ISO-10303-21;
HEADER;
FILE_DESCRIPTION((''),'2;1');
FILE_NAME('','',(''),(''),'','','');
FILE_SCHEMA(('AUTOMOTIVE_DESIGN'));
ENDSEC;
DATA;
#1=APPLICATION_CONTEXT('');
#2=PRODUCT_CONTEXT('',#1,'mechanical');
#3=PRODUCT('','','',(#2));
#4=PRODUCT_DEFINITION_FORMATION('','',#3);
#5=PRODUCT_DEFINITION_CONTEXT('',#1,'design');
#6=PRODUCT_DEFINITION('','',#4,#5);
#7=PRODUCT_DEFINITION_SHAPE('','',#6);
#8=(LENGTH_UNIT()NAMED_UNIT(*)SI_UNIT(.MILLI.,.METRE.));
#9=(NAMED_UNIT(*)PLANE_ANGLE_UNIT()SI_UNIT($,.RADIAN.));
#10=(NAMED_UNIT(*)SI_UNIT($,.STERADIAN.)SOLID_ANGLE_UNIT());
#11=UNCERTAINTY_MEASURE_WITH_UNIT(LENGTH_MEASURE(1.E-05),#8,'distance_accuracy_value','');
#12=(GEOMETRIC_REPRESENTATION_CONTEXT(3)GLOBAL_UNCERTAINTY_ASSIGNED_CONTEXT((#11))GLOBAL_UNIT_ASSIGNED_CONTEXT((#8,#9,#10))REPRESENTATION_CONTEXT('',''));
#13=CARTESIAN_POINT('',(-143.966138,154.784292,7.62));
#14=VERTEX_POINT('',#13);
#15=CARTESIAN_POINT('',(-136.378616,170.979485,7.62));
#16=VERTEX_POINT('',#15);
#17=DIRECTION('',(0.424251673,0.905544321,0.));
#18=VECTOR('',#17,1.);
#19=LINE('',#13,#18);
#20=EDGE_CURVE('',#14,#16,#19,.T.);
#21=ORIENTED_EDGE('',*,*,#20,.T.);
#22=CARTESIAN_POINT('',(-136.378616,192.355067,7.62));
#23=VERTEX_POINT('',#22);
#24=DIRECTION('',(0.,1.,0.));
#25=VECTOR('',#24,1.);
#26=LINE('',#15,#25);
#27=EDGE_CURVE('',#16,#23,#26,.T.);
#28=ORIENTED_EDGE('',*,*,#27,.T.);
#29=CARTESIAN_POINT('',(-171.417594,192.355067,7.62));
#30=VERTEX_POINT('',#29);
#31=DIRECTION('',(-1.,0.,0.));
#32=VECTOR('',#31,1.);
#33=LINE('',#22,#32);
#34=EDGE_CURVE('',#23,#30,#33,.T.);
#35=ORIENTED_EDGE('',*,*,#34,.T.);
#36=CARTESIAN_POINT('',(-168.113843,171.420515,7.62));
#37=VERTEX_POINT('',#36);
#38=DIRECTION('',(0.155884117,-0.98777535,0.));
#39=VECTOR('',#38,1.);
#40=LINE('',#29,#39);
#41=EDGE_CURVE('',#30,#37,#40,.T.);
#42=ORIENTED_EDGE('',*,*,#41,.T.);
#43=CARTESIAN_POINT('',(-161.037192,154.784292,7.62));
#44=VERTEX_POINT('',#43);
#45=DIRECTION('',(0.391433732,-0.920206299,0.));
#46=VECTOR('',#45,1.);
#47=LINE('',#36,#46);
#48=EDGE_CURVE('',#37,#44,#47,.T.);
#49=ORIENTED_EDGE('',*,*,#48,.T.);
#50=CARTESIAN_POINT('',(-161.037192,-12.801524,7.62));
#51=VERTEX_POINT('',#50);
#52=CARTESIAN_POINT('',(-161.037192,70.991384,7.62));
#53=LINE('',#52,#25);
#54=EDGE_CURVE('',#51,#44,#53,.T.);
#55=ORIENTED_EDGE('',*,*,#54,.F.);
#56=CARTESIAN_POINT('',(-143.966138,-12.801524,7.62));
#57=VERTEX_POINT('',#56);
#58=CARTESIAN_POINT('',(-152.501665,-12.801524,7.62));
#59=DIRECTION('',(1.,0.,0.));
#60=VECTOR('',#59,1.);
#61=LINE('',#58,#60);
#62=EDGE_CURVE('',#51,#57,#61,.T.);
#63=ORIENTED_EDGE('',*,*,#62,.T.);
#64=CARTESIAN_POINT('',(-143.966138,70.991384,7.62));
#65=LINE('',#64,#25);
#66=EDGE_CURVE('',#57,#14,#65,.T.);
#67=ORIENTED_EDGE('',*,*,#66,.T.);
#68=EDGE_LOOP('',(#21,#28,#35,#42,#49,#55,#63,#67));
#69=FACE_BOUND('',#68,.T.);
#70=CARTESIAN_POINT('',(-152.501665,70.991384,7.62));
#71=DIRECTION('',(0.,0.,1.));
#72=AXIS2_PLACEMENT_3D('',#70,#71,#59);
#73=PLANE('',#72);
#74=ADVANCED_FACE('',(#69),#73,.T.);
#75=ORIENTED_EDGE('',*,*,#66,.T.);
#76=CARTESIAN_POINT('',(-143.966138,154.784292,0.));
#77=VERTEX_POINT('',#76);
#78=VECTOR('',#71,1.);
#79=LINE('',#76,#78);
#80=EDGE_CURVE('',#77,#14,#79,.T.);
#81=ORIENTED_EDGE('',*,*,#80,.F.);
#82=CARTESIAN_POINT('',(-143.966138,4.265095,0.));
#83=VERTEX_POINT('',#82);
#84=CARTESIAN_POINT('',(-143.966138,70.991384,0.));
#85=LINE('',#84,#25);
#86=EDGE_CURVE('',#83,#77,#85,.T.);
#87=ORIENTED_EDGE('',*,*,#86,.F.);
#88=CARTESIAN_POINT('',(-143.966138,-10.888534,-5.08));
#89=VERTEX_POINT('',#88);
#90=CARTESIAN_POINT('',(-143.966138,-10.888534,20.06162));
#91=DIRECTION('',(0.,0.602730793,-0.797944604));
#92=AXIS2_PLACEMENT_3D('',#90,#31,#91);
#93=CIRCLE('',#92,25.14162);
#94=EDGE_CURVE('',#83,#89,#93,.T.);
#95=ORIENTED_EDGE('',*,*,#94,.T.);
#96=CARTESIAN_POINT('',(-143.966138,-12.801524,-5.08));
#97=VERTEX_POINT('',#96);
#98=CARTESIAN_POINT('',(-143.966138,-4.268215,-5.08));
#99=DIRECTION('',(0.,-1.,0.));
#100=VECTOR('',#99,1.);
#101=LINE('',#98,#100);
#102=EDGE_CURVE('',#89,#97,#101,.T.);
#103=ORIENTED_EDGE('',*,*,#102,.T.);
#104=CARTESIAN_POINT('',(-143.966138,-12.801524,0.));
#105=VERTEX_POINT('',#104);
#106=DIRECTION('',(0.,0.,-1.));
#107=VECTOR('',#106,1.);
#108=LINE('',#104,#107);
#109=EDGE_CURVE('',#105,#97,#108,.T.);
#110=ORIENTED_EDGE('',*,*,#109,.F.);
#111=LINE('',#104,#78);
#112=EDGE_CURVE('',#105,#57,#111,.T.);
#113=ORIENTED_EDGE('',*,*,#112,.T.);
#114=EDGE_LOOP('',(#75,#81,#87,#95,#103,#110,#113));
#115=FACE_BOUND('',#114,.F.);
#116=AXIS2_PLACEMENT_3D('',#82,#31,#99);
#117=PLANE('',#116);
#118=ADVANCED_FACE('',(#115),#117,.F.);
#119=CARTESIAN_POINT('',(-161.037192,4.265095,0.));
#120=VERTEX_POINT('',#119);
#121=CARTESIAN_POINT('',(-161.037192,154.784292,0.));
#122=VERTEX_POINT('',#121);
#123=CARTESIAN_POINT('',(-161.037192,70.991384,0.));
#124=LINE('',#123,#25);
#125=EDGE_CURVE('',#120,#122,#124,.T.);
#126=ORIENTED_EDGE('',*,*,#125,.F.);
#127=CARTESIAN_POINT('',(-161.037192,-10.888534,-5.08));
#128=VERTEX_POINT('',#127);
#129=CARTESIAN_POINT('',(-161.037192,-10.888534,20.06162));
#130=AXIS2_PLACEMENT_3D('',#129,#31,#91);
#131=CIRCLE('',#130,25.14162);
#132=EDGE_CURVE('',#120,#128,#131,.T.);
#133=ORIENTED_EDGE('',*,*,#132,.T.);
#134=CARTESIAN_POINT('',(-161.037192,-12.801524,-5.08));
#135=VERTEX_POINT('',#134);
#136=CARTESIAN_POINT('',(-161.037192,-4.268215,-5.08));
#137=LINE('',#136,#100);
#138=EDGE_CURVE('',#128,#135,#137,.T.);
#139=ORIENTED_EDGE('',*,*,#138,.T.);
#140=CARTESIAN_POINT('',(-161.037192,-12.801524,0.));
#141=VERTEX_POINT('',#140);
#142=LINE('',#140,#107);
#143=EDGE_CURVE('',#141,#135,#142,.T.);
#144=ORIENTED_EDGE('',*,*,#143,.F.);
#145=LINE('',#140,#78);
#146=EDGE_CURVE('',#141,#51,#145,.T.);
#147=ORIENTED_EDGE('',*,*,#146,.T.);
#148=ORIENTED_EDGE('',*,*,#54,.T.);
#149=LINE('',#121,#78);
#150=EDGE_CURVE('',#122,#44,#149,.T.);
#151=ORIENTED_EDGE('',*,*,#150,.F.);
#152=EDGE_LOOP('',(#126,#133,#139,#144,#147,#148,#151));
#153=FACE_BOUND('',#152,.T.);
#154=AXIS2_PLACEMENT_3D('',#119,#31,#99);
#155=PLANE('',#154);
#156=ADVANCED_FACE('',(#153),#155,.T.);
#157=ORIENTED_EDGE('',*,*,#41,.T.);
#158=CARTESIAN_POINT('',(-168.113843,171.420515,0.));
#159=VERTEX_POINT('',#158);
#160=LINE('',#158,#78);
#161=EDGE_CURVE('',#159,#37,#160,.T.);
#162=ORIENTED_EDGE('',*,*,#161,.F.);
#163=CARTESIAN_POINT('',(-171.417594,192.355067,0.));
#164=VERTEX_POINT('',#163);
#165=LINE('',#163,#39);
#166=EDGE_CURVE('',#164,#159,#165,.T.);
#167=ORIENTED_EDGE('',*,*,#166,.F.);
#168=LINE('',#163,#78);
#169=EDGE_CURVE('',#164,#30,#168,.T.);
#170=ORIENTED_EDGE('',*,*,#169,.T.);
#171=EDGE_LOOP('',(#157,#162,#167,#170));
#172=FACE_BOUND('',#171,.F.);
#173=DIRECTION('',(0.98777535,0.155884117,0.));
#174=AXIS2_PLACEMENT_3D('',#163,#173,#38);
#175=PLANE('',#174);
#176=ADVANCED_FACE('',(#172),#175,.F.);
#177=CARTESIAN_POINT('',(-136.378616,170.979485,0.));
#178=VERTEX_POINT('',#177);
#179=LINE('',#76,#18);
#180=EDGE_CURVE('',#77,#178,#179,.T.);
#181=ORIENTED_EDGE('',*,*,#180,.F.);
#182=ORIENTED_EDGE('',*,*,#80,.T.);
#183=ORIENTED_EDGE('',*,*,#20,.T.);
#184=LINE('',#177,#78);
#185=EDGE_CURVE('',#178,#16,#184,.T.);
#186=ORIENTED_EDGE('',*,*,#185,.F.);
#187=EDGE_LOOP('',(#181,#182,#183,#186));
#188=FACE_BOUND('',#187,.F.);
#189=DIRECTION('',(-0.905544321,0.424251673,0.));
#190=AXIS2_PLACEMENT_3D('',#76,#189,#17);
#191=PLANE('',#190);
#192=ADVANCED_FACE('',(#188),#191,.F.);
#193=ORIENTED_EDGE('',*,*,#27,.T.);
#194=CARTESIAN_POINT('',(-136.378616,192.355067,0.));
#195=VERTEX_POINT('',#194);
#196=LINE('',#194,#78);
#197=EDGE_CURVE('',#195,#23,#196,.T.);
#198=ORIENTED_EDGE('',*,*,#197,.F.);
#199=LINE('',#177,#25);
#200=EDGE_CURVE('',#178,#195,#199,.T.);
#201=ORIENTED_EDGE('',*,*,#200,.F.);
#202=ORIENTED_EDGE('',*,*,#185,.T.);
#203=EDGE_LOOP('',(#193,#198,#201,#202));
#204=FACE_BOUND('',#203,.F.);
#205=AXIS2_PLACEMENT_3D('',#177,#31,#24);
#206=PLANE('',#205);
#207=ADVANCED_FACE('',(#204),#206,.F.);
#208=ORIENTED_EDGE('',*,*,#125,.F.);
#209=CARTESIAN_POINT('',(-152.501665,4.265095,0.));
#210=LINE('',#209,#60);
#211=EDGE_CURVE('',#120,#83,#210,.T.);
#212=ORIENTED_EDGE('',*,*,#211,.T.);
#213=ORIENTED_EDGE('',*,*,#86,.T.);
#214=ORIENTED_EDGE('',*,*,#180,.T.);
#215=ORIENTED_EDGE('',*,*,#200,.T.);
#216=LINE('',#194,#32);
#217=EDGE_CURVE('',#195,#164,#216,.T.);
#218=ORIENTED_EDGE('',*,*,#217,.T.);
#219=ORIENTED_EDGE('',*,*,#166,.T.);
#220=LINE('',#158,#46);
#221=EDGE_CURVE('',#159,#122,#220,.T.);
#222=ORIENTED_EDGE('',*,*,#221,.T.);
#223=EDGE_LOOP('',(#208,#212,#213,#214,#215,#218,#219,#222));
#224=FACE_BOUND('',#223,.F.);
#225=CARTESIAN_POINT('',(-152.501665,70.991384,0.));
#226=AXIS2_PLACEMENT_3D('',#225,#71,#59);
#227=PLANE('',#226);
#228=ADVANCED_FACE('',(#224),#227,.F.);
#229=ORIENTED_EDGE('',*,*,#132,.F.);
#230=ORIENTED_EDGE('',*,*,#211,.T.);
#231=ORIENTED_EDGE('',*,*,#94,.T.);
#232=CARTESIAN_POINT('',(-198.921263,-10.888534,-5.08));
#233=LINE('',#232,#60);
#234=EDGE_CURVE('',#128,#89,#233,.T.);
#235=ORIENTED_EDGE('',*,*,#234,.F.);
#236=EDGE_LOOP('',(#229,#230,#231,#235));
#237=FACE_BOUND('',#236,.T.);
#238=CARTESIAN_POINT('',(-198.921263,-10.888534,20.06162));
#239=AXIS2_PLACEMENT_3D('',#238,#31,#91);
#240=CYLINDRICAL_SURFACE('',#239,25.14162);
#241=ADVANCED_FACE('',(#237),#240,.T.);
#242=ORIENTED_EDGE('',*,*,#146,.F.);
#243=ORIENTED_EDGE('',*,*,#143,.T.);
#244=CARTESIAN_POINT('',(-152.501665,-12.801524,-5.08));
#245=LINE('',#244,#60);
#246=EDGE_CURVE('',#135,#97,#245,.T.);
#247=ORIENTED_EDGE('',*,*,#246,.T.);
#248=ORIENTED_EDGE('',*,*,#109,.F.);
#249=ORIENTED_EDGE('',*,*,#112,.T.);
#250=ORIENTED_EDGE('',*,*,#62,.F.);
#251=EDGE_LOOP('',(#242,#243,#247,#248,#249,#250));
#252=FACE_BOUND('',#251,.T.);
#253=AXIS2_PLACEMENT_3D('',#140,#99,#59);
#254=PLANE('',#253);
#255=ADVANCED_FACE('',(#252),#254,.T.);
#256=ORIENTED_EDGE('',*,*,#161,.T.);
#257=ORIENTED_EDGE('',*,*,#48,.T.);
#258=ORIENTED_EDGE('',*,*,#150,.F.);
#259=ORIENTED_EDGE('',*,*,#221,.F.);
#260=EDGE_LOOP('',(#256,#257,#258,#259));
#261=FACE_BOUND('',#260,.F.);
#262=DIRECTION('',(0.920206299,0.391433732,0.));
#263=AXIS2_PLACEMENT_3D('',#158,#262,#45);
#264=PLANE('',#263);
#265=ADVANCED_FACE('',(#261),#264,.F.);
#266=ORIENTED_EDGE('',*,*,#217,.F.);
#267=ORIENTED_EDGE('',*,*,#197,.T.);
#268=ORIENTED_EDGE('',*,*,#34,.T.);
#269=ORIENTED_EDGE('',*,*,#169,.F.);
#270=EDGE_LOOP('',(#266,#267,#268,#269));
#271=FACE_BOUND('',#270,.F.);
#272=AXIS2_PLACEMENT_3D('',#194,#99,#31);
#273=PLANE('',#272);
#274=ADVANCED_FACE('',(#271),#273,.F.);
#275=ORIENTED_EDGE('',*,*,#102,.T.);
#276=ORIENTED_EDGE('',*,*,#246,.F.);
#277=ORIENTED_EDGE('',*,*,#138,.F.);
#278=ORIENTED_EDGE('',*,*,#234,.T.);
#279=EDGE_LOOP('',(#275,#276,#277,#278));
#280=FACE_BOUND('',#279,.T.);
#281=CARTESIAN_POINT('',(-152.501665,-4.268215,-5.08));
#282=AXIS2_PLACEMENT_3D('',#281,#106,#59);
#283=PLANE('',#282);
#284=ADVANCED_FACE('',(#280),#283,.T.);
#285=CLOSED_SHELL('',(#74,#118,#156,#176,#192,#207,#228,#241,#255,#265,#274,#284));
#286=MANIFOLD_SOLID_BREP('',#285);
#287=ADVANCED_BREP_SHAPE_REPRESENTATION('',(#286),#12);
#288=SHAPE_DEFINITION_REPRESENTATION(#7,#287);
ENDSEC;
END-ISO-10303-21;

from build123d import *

# Parameters (mm, degrees)
F0_W        = 17.0710533857
F0_H        = 167.5858162344
F1_DEPTH    = 7.62
F2_W        = 17.0710533857
F2_H        = 17.0666188933
F3_DEPTH    = 5.08
F4_T1_DEPTH = 92.8391963602


# Not quite as in the source:
# - a fillet or chamfer that OpenCascade refuses, or shapes differently, is made with other operations: its cross-section is extruded or revolved along the edge and cut away or added


with BuildPart() as f1:
    # F0 (on Top) → F1 (new body)
    with BuildSketch(Plane.XY):
        with Locations((-152.5016650558, 70.9913838655)):
            Rectangle(F0_W, F0_H)
        Polygon((-168.1138426065, 171.4205145836), (-161.0371917486, 154.7842919827), (-143.9661383629, 154.7842919827), (-136.3786160946, 170.9794849157), (-136.3786160946, 192.3550665379), (-171.417593956, 192.3550665379), align=None)
    extrude(amount=F1_DEPTH)

    # F2 (on face) → F3 (join)
    with BuildSketch(Plane(origin=(0, 0, 0), x_dir=(1, 0, 0), z_dir=(0, 0, -1))):
        with Locations((-152.5016650558, 4.2682148051)):
            Rectangle(F2_W, F2_H)
    extrude(amount=F3_DEPTH)

    # F4: fillet of radius 25.1416200386 on 1 edges, made by hand

    # F4_s2 → F4_t1 (cut)
    with BuildSketch(Plane.YZ.offset(-198.9212632358)):
        with BuildLine():
            ThreePointArc((4.2650946416, 0), (-2.8973065821, -3.7761932686), (-10.8885339533, -5.08))
            Line((-10.8885339533, -5.08), (-10.8885339533, -5.5828324008))
            Line((-10.8885339533, -5.5828324008), (4.2650946416, -5.5828324008))
            Line((4.2650946416, -5.5828324008), (4.7679270424, -5.08))
            ThreePointArc((4.7679270424, -5.08), (4.7679270424, -2.54), (4.5681672135, -0.4012324008))
            Line((4.5681672135, -0.4012324008), (4.2650946416, 0))
        make_face()
    extrude(amount=F4_T1_DEPTH, mode=Mode.SUBTRACT)


solid = f1.part
